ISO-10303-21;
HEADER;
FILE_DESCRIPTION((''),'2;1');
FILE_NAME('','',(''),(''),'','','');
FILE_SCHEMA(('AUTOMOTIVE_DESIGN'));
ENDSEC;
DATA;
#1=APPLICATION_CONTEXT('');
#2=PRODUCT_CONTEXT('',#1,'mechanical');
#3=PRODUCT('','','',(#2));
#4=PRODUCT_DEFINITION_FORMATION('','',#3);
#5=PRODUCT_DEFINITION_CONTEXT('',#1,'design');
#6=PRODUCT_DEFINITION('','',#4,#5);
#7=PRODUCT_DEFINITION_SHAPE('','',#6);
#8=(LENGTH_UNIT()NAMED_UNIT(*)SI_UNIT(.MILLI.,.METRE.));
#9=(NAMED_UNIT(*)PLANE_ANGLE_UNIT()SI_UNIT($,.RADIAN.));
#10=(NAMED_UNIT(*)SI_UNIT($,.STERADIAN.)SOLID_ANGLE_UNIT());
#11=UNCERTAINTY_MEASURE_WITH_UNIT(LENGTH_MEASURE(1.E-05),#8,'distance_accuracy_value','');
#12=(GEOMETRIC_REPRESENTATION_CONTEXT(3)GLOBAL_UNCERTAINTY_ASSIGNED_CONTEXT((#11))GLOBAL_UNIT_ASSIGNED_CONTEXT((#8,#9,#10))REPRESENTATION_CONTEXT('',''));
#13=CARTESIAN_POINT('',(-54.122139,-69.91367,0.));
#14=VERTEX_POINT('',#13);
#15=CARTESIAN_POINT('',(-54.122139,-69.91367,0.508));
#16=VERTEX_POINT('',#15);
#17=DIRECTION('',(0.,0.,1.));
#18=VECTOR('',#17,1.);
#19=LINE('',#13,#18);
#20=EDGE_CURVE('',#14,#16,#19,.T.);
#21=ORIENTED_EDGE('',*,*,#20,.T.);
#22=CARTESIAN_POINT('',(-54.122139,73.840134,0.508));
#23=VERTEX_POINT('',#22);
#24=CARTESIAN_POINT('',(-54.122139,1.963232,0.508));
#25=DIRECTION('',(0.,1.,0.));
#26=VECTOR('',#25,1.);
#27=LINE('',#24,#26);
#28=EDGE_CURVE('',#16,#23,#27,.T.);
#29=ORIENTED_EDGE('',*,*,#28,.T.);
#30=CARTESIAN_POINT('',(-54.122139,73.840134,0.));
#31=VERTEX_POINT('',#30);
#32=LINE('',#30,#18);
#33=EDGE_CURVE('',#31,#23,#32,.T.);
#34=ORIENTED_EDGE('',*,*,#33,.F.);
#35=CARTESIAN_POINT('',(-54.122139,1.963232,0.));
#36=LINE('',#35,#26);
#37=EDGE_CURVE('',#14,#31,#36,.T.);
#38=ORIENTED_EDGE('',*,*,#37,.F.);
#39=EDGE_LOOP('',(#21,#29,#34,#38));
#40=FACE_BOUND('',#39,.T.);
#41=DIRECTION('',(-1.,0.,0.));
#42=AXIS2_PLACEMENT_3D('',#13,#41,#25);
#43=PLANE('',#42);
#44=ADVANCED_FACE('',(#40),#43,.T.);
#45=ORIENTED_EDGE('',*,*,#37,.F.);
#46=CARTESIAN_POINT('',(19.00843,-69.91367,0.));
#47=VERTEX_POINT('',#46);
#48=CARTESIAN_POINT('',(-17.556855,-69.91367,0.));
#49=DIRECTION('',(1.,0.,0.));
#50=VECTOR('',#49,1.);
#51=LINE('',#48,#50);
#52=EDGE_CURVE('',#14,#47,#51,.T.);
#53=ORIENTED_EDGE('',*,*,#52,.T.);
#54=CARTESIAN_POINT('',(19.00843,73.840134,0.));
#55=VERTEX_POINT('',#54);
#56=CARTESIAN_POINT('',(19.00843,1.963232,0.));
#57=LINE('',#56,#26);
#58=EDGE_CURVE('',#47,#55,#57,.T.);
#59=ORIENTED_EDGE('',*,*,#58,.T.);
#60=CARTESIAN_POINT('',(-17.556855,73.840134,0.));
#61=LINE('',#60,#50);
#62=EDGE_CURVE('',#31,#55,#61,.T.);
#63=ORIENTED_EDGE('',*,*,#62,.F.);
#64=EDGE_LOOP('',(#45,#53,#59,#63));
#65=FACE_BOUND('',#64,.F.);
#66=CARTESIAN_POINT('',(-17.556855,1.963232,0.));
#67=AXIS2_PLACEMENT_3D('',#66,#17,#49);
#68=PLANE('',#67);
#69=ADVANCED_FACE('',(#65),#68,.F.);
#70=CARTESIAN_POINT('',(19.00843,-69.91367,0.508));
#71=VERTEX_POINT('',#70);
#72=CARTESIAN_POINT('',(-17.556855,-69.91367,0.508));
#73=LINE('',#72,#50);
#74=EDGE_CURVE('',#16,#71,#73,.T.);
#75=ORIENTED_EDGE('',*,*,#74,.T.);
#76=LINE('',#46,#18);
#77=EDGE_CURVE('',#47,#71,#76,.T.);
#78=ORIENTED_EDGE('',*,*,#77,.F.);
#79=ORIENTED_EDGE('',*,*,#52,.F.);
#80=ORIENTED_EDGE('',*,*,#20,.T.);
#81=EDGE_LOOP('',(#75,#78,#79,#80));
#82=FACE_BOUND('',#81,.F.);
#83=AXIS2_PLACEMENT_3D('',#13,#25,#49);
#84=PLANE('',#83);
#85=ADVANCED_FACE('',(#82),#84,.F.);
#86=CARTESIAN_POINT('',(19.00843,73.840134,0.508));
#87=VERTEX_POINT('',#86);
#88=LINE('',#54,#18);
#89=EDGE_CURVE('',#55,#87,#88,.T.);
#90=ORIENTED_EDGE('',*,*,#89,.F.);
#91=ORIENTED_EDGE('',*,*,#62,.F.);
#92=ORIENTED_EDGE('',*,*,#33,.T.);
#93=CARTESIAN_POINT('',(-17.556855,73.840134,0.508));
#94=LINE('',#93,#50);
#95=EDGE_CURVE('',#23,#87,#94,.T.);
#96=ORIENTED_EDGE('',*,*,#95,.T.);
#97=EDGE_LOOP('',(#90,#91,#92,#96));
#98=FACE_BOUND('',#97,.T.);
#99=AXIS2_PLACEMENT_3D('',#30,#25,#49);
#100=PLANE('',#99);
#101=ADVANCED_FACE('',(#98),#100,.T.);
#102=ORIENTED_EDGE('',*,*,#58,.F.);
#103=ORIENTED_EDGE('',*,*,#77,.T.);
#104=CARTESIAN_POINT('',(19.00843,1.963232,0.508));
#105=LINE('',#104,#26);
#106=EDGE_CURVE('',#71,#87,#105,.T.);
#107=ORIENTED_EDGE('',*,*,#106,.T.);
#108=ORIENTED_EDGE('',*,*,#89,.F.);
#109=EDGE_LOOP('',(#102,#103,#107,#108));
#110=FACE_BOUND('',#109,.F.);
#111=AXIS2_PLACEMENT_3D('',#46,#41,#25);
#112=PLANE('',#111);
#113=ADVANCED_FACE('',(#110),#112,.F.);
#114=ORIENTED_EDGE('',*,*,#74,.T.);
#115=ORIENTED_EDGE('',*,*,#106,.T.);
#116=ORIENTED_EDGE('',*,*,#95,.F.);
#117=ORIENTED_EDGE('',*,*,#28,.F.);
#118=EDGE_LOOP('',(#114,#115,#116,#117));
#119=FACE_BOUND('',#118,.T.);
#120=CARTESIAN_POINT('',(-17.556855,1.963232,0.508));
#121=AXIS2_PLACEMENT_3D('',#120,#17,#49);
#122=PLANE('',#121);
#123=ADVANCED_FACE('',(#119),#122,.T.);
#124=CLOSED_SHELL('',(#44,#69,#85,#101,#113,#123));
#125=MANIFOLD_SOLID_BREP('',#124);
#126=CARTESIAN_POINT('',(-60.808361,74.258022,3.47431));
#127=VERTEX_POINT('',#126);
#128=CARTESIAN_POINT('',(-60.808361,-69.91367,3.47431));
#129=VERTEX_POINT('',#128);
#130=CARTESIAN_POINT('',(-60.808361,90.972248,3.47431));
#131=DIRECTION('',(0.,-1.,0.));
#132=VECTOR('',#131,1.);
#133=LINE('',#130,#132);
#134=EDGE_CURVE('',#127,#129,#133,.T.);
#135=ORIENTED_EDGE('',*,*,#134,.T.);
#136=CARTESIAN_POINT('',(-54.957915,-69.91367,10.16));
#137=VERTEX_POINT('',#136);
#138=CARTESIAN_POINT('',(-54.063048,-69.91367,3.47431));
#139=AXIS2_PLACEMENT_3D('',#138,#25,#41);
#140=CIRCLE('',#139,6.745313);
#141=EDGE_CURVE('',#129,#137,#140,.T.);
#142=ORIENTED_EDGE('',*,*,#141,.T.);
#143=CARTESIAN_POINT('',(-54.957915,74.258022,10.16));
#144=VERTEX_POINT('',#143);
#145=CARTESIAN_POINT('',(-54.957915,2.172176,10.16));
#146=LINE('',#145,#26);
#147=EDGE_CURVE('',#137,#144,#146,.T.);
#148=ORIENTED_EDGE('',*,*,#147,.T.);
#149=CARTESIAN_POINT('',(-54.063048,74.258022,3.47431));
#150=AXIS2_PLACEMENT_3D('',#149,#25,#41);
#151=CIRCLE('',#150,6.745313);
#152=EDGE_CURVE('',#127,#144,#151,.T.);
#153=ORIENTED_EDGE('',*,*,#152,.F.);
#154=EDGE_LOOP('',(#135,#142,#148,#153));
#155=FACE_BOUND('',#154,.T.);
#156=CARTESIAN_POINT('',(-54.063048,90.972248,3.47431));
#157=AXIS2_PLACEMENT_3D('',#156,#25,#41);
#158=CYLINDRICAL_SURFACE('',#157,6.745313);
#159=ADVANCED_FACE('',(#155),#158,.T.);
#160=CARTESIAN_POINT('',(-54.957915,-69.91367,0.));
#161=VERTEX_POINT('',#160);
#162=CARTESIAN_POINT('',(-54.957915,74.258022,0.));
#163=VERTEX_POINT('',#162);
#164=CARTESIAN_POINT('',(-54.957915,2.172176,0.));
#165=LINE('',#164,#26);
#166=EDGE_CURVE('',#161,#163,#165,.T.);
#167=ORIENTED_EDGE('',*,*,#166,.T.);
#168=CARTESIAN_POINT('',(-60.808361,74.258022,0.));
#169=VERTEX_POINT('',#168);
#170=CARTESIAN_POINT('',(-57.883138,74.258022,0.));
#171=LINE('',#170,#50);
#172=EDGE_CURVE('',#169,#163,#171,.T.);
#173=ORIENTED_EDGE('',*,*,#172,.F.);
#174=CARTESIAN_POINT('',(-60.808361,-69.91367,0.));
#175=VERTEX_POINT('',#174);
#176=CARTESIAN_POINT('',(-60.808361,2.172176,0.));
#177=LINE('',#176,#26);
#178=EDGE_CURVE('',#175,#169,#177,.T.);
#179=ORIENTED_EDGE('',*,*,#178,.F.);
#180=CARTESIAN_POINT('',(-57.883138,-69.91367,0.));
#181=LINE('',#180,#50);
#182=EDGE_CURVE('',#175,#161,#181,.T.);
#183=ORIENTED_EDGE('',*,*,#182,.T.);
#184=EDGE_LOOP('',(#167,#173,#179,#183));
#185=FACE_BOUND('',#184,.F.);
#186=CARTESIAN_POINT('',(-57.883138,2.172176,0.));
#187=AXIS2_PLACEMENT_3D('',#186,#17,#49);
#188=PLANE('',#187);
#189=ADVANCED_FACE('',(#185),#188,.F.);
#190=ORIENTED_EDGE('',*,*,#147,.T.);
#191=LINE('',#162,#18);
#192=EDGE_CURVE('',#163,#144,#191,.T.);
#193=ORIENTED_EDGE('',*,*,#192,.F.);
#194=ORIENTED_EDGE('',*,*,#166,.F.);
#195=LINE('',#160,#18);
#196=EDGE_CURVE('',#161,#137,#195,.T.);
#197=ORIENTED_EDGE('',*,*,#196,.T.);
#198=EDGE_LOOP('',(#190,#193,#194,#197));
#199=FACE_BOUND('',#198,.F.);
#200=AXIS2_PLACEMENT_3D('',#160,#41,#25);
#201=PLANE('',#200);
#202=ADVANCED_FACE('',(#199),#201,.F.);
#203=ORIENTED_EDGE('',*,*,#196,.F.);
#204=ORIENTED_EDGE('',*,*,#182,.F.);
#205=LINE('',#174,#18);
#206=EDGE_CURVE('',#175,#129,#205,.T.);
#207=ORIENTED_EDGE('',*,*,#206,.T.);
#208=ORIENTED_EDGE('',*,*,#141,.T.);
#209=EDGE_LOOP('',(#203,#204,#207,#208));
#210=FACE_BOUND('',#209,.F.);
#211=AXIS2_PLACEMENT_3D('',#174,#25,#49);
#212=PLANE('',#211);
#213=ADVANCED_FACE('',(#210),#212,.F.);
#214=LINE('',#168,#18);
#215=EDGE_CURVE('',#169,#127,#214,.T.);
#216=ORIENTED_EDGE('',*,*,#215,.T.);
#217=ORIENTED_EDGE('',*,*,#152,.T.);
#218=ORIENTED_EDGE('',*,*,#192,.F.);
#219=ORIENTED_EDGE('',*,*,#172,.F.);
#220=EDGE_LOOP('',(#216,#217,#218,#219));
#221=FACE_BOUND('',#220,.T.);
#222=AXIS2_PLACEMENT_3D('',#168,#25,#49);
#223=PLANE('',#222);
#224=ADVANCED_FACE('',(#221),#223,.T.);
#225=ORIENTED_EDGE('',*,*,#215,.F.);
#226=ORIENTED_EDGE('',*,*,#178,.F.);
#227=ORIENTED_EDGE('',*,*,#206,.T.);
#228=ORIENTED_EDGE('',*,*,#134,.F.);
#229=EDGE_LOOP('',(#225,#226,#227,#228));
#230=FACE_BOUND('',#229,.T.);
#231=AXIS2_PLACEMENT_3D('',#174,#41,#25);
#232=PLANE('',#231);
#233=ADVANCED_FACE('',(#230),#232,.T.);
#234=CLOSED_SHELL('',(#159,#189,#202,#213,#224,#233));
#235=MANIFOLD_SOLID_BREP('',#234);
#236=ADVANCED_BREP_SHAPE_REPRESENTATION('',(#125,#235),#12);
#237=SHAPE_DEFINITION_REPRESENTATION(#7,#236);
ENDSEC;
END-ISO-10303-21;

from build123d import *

# Parameters (mm, degrees)
F1_W        = 5.8504454792
F1_H        = 144.171692431
F2_DEPTH    = 10.16
F0_W        = 73.1305684894
F0_H        = 143.7538042665
F3_DEPTH    = 0.508
F4_T1_DEPTH = 177.600144384


# Not quite as in the source:
# - a fillet or chamfer that OpenCascade refuses, or shapes differently, is made with other operations: its cross-section is extruded or revolved along the edge and cut away or added


with BuildPart() as f2:
    # F1 (on Top) → F2 (new body)
    with BuildSketch(Plane.XY):
        with Locations((-57.8831378371, 2.1721757948)):
            Rectangle(F1_W, F1_H)
    extrude(amount=F2_DEPTH)

    # F4: fillet of radius 6.7453126933 on 1 edges, made by hand

    # F4_s2 → F4_t1 (cut)
    with BuildSketch(Plane.XZ.offset(-90.9722479869)):
        with BuildLine():
            ThreePointArc((-60.8083605766, 3.4743096094), (-59.1392375227, 7.9163296539), (-54.9579150975, 10.16))
            Line((-54.9579150975, 10.16), (-60.8083605766, 10.16))
            Line((-60.8083605766, 10.16), (-60.8083605766, 3.4743096094))
        make_face()
    extrude(amount=F4_T1_DEPTH, mode=Mode.SUBTRACT)


with BuildPart() as f3:
    # F0 (on Top) → F3 (new body)
    with BuildSketch(Plane.XY):
        with Locations((-17.5568545237, 1.9632317126)):
            Rectangle(F0_W, F0_H)
    extrude(amount=F3_DEPTH)


solid = Compound([f2.part, f3.part])
